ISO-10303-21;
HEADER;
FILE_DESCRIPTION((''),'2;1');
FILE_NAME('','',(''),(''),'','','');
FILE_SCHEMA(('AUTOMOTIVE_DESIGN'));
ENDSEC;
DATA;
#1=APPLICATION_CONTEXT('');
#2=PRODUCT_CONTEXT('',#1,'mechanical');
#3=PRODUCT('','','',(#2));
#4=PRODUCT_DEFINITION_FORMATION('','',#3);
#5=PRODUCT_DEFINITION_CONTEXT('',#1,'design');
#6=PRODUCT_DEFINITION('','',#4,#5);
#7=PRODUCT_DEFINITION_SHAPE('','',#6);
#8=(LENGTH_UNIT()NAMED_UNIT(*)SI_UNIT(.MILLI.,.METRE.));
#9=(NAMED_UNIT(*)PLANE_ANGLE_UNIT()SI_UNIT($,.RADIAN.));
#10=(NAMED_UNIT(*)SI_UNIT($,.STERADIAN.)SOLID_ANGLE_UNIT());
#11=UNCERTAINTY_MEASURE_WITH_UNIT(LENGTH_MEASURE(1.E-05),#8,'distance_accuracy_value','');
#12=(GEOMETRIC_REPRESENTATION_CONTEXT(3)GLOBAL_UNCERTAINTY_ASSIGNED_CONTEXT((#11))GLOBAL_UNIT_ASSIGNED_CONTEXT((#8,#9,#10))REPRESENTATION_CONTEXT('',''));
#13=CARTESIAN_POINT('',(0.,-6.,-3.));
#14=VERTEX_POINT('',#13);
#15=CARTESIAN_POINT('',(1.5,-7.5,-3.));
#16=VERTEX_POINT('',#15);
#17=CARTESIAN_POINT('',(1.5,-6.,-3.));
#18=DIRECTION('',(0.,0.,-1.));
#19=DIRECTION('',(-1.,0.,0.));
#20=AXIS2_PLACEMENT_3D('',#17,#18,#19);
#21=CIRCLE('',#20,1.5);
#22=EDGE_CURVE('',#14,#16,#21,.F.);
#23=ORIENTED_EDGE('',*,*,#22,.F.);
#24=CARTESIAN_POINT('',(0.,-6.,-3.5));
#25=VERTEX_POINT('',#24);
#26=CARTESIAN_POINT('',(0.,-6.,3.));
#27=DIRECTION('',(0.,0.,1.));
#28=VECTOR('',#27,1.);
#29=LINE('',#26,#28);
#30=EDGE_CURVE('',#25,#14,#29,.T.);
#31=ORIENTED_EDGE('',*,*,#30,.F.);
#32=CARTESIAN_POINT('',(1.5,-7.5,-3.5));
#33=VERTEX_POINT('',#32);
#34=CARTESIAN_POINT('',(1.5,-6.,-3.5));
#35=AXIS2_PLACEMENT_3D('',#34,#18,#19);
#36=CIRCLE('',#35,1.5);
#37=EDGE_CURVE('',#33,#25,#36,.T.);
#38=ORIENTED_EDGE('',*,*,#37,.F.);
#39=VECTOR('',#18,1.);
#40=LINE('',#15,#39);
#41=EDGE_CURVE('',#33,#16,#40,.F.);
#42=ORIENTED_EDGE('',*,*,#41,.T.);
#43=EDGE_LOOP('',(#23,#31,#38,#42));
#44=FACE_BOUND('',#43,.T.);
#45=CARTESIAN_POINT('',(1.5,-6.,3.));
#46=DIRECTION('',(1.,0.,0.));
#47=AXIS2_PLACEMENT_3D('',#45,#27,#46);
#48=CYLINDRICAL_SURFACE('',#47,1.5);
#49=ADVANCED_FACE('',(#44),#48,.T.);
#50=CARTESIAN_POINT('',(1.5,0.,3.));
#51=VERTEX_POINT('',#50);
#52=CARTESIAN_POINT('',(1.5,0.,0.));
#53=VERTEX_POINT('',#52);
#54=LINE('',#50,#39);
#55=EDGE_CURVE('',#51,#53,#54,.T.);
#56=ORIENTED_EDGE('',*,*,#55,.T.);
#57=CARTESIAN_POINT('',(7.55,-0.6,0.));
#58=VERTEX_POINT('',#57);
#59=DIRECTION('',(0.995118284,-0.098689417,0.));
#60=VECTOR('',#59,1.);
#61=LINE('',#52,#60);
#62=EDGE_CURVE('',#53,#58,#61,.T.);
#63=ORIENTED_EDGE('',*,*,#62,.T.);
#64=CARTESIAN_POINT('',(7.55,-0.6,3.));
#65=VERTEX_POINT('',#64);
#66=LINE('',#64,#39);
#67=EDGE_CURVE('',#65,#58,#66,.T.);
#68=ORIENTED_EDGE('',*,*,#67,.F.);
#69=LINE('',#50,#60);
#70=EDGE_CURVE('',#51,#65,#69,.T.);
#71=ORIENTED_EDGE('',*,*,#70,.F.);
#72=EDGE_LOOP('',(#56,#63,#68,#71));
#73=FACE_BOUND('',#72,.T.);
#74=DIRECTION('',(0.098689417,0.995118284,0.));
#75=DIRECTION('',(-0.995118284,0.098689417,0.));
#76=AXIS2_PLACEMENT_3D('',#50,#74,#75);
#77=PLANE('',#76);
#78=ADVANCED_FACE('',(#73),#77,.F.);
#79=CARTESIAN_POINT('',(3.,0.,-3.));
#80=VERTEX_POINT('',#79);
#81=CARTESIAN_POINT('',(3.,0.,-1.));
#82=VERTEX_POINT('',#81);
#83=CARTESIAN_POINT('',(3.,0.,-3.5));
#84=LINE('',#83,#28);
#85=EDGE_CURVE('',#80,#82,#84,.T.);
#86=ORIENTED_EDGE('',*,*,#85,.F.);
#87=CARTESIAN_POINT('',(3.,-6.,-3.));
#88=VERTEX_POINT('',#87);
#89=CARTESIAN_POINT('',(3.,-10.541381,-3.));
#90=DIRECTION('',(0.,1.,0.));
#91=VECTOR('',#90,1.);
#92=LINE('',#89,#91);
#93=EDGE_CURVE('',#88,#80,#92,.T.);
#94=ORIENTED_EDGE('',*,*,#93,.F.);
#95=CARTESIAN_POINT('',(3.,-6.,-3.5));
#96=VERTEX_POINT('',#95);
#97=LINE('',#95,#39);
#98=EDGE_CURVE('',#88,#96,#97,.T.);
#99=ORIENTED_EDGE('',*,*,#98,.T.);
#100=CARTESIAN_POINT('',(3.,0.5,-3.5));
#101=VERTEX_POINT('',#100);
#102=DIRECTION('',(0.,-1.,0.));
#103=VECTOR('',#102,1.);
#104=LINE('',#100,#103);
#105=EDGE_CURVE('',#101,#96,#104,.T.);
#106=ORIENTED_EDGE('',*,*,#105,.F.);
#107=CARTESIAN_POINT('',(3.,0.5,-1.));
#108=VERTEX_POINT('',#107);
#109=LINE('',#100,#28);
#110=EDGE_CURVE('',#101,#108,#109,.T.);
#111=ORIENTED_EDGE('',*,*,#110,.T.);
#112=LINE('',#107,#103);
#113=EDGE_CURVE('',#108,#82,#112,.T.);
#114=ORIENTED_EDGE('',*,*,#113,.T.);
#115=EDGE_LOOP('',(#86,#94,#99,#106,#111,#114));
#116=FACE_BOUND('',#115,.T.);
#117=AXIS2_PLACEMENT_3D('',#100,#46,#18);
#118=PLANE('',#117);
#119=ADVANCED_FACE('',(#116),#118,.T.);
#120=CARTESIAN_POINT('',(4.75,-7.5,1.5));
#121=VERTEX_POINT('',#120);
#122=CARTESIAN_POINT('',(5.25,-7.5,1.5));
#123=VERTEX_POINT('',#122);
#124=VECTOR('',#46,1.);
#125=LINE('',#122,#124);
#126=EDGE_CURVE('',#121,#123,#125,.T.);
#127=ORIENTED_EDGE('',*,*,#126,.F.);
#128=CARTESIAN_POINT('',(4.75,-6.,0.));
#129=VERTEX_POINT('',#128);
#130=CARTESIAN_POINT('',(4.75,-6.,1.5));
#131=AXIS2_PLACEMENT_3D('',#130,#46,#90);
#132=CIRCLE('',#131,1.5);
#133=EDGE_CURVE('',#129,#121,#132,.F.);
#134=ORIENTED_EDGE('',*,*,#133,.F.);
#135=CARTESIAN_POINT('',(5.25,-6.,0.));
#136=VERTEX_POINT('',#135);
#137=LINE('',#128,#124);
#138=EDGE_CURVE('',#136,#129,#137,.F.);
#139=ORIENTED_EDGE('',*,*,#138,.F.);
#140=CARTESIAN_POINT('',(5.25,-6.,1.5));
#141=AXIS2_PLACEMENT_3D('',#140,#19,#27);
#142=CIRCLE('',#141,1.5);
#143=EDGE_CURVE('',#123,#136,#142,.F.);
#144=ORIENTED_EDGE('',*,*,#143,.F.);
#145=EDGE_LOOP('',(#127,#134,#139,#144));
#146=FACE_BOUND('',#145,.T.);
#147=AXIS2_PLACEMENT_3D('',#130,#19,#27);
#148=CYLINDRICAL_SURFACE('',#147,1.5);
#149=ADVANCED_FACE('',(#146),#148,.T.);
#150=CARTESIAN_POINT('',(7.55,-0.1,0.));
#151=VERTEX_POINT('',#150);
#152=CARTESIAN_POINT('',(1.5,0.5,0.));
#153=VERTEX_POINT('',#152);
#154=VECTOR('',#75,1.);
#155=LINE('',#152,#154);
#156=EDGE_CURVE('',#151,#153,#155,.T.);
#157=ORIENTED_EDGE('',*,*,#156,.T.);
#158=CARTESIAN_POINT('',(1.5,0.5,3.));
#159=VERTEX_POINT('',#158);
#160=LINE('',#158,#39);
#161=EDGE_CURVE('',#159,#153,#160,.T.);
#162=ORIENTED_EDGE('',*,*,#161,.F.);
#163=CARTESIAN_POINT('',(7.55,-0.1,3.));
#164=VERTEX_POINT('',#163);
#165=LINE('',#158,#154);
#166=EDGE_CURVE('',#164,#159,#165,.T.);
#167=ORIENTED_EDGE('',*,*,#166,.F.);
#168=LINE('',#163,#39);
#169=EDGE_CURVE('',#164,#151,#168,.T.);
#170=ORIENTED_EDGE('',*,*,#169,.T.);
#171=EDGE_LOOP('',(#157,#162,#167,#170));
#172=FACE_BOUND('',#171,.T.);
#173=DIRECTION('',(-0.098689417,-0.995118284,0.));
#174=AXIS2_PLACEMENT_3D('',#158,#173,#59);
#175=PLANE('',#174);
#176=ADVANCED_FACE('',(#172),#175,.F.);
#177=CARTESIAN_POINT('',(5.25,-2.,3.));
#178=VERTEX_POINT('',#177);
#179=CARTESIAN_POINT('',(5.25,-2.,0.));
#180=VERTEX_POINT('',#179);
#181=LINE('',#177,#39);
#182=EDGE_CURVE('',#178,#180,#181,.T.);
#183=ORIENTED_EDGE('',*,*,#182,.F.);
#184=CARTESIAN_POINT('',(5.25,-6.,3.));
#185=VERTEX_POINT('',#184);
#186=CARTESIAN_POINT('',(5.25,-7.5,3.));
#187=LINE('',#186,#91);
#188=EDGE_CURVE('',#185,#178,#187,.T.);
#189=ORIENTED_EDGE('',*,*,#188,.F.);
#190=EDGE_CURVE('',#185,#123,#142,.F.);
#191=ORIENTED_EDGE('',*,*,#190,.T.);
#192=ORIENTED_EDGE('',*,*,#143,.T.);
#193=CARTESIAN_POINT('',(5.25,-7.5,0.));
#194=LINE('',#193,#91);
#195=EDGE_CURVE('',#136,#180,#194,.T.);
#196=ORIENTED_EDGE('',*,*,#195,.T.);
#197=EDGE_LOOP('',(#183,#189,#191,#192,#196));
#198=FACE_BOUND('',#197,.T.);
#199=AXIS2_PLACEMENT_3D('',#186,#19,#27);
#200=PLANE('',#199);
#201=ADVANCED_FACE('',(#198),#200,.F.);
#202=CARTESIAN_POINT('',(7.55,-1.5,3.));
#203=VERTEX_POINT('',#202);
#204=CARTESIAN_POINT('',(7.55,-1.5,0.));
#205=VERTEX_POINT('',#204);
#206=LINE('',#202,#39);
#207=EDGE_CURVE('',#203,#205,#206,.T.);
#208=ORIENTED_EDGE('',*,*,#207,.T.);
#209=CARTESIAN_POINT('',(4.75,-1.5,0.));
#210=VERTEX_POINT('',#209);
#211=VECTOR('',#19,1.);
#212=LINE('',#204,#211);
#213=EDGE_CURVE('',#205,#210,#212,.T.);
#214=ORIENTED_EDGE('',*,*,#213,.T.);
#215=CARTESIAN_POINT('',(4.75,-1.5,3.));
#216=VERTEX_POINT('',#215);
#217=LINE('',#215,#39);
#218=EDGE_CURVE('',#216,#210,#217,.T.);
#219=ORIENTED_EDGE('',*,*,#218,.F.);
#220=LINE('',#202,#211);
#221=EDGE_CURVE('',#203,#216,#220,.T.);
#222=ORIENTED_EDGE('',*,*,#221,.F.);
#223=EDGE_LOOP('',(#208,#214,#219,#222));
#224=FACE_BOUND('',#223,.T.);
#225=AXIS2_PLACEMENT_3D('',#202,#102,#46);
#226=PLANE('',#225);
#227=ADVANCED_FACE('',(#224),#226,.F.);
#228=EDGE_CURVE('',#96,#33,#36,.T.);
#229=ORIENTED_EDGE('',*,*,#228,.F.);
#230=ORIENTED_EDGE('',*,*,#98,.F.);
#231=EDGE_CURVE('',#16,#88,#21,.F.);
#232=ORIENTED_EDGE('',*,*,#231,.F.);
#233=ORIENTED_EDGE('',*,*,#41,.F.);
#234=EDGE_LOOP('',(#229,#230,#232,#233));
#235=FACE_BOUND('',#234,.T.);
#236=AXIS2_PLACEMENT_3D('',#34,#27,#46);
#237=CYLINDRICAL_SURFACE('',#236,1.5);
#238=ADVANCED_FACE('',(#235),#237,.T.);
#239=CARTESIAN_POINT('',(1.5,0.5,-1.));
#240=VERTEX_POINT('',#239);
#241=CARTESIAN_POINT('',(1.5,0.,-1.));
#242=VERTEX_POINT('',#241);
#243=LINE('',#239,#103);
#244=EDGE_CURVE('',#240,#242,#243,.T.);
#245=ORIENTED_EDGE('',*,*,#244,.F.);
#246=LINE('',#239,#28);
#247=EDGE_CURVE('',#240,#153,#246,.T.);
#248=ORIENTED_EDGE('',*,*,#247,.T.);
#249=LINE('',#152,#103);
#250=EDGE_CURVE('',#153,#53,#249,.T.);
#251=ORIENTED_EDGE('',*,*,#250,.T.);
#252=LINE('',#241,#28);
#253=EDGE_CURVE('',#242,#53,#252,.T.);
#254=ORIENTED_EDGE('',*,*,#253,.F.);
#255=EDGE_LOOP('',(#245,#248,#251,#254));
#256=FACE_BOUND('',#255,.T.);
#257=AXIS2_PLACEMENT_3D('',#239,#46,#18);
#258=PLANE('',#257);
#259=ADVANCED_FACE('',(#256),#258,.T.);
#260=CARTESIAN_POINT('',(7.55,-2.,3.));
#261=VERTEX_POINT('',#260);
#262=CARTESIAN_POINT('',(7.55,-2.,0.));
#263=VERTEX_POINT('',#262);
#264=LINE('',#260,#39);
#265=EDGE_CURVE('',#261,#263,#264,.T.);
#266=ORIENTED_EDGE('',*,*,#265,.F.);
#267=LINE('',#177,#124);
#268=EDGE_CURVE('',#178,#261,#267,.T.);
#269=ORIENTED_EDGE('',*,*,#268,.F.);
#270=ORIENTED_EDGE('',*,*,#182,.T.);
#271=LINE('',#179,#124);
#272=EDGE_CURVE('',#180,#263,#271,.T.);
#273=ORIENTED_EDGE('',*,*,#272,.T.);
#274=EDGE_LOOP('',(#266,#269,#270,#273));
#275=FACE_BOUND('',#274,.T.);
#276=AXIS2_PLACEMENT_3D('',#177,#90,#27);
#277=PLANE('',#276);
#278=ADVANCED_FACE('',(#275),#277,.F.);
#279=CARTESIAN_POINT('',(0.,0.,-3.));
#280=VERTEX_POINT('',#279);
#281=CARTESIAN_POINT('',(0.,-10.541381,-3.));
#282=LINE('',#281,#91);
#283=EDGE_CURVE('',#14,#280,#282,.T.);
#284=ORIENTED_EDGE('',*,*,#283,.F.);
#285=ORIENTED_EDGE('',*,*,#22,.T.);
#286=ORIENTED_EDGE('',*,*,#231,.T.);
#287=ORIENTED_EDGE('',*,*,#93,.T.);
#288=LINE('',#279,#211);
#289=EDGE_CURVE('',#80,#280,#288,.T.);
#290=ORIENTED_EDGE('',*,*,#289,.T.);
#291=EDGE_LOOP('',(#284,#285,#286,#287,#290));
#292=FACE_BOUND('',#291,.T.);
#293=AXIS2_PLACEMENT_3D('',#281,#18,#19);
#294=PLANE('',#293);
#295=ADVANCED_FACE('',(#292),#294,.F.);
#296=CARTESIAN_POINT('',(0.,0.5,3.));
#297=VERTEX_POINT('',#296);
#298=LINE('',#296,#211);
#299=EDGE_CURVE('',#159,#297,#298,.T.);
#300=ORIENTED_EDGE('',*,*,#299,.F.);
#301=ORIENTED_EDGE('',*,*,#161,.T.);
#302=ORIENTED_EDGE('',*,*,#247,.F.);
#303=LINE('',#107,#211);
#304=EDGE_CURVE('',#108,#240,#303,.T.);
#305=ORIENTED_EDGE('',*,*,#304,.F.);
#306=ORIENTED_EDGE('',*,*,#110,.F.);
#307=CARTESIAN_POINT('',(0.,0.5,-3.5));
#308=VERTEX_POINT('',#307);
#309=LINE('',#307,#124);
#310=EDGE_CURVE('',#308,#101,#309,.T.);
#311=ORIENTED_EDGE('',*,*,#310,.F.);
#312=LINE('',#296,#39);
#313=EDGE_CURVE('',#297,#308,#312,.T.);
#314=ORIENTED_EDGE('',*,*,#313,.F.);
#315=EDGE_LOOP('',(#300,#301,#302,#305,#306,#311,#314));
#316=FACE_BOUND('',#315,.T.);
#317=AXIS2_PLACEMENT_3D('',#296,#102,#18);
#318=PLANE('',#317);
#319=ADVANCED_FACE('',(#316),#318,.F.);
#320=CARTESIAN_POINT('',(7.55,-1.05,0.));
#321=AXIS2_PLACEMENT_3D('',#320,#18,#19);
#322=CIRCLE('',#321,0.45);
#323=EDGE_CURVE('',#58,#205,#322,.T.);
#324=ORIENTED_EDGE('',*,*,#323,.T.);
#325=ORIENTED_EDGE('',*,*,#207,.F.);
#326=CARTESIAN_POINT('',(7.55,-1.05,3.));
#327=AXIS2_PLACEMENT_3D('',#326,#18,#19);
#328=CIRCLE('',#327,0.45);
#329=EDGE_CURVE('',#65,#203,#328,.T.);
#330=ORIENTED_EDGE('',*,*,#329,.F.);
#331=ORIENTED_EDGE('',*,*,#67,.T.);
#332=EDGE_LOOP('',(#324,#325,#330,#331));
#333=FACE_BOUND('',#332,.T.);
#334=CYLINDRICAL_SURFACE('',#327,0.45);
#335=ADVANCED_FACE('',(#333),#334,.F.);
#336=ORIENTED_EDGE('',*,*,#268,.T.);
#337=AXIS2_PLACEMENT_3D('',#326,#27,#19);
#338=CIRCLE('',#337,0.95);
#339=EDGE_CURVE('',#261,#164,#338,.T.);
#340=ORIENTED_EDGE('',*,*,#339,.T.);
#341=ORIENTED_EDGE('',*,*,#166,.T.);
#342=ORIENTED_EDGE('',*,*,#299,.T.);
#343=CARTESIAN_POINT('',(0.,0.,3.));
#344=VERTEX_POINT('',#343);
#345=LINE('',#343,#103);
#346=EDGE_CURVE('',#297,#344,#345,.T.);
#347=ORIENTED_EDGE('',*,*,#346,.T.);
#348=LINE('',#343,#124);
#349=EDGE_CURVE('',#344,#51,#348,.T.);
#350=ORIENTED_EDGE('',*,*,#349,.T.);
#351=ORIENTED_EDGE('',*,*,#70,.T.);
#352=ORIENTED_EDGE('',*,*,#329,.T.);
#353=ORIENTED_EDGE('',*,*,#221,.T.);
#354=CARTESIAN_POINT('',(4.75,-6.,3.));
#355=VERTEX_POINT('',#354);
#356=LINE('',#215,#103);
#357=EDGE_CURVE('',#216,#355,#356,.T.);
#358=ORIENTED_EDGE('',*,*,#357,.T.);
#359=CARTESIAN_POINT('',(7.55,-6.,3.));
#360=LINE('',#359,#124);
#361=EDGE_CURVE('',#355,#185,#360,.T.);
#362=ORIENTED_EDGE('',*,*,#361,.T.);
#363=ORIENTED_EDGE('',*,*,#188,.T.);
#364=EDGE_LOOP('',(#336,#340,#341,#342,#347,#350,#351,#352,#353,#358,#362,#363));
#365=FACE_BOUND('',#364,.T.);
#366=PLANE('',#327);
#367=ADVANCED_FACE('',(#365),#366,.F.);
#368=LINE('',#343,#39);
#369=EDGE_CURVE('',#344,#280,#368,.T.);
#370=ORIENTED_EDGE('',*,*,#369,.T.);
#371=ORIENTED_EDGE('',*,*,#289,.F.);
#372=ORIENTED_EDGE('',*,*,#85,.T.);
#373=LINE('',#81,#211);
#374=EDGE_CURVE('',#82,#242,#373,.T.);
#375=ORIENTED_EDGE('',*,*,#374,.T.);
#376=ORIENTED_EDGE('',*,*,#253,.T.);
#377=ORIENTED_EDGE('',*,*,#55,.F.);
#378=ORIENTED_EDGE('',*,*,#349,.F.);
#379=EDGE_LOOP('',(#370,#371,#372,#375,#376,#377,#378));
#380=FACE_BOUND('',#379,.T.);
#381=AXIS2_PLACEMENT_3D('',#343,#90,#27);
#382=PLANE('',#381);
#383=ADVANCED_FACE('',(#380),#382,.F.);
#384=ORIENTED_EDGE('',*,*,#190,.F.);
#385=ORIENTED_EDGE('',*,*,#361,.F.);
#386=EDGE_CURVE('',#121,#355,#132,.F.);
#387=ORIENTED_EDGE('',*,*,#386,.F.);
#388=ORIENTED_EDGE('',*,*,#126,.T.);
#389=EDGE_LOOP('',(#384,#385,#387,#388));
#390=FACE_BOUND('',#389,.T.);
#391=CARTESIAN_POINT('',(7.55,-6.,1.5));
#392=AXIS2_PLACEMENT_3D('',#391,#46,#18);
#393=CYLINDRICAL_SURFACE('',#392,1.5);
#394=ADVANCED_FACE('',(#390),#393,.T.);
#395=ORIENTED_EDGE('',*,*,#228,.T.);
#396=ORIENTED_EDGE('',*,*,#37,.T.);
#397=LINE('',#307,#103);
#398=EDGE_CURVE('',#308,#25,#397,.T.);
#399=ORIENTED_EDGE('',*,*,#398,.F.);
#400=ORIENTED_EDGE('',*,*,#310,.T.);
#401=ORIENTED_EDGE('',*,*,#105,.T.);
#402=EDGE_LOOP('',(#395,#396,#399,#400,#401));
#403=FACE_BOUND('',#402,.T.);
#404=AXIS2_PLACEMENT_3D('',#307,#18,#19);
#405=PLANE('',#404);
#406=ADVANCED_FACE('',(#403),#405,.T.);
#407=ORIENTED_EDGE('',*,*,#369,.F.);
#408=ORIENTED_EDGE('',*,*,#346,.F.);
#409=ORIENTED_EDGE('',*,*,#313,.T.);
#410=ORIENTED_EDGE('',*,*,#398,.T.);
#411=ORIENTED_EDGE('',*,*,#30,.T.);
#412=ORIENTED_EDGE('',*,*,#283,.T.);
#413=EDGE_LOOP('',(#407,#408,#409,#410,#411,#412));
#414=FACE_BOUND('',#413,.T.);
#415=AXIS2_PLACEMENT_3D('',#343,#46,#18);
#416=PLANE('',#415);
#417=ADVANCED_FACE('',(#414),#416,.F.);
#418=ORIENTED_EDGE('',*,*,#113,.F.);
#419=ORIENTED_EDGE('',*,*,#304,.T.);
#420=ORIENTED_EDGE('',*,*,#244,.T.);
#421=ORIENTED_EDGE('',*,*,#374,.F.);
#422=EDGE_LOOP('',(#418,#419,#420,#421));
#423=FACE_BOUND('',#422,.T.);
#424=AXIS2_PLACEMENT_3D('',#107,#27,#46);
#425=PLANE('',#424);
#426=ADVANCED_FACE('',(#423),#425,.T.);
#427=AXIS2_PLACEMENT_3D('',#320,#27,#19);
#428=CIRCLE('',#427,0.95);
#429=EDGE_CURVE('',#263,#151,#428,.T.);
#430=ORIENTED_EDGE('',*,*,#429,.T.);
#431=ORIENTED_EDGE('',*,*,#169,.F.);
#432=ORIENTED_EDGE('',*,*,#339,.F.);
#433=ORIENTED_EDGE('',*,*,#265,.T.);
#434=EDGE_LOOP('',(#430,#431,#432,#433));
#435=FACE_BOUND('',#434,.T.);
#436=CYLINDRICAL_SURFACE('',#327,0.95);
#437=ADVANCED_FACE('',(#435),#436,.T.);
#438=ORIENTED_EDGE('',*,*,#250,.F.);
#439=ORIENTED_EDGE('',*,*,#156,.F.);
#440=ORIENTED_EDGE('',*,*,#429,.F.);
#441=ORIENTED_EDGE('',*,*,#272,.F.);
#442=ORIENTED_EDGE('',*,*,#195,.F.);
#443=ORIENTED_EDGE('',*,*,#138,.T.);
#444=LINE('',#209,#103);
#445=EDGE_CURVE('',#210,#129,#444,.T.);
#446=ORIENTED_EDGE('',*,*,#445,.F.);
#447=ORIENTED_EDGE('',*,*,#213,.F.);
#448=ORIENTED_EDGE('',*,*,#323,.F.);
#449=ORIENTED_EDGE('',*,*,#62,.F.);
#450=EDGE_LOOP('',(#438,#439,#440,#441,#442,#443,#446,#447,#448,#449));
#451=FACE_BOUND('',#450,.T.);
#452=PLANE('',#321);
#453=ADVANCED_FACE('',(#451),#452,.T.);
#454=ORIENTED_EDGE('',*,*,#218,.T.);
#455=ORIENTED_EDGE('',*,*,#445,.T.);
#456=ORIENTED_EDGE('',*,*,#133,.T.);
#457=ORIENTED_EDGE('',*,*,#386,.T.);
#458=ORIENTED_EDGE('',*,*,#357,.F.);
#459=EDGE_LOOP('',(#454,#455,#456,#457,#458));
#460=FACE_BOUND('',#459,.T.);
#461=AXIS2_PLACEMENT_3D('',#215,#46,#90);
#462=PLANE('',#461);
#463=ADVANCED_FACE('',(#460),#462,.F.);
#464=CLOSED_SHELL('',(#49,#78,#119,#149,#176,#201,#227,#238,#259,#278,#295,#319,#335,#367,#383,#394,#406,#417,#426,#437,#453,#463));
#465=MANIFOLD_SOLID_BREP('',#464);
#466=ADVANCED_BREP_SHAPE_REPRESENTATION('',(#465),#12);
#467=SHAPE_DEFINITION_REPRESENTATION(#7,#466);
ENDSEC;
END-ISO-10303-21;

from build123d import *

# Parameters (mm, degrees)
BOSS_EXTRUDE1_DEPTH = 3
BOSS_EXTRUDE3_DEPTH = 0.5
SKETCH4_W           = 3
SKETCH4_H           = 0.5
BOSS_EXTRUDE5_DEPTH = 7.5
FILLET1_R           = 1.5


with BuildPart() as part:
    # Sketch1 → Boss-Extrude1 (new body)
    with BuildSketch(Plane.XY):
        with BuildLine():
            Line((0, 0), (1.5, 0))
            Line((1.5, 0), (7.55, -0.6))
            ThreePointArc((7.55, -0.6), (8, -1.05), (7.55, -1.5))
            Line((7.55, -1.5), (4.75, -1.5))
            Line((4.75, -1.5), (4.75, -7.5))
            Line((4.75, -7.5), (5.25, -7.5))
            Line((5.25, -7.5), (5.25, -2))
            Line((5.25, -2), (7.55, -2))
            ThreePointArc((7.55, -2), (8.5, -1.05), (7.55, -0.1))
            Line((7.55, -0.1), (1.5, 0.5))
            Line((1.5, 0.5), (0, 0.5))
            Line((0, 0.5), (0, 0))
        make_face()
    extrude(amount=BOSS_EXTRUDE1_DEPTH)

    # Sketch3 → Boss-Extrude3 (add)
    with BuildSketch(Plane(origin=(0, 0, 0), x_dir=(-1, 0, 0), z_dir=(0, -1, 0))):
        Polygon((-3, 1), (-1.5, 1), (-1.5, 0), (0, 0), (0, 3.5), (-3, 3.5), align=None)
    extrude(amount=-BOSS_EXTRUDE3_DEPTH)

    # Sketch4 → Boss-Extrude5 (add)
    with BuildSketch(Plane.XZ):
        with Locations((1.5, -3.25)):
            Rectangle(SKETCH4_W, SKETCH4_H)
    extrude(amount=BOSS_EXTRUDE5_DEPTH)

    # Fillet1
    fillet1_edges = [part.edges().sort_by_distance(p)[0] for p in [
        (0, -7.5, -3.25),
        (3, -7.5, -3.25),
        (5, -7.5, 3),
        (5, -7.5, 0),
    ]]
    fillet(fillet1_edges, radius=FILLET1_R - 0.0001)  # a hair under: the kernel refuses the full size


solid = part.part
